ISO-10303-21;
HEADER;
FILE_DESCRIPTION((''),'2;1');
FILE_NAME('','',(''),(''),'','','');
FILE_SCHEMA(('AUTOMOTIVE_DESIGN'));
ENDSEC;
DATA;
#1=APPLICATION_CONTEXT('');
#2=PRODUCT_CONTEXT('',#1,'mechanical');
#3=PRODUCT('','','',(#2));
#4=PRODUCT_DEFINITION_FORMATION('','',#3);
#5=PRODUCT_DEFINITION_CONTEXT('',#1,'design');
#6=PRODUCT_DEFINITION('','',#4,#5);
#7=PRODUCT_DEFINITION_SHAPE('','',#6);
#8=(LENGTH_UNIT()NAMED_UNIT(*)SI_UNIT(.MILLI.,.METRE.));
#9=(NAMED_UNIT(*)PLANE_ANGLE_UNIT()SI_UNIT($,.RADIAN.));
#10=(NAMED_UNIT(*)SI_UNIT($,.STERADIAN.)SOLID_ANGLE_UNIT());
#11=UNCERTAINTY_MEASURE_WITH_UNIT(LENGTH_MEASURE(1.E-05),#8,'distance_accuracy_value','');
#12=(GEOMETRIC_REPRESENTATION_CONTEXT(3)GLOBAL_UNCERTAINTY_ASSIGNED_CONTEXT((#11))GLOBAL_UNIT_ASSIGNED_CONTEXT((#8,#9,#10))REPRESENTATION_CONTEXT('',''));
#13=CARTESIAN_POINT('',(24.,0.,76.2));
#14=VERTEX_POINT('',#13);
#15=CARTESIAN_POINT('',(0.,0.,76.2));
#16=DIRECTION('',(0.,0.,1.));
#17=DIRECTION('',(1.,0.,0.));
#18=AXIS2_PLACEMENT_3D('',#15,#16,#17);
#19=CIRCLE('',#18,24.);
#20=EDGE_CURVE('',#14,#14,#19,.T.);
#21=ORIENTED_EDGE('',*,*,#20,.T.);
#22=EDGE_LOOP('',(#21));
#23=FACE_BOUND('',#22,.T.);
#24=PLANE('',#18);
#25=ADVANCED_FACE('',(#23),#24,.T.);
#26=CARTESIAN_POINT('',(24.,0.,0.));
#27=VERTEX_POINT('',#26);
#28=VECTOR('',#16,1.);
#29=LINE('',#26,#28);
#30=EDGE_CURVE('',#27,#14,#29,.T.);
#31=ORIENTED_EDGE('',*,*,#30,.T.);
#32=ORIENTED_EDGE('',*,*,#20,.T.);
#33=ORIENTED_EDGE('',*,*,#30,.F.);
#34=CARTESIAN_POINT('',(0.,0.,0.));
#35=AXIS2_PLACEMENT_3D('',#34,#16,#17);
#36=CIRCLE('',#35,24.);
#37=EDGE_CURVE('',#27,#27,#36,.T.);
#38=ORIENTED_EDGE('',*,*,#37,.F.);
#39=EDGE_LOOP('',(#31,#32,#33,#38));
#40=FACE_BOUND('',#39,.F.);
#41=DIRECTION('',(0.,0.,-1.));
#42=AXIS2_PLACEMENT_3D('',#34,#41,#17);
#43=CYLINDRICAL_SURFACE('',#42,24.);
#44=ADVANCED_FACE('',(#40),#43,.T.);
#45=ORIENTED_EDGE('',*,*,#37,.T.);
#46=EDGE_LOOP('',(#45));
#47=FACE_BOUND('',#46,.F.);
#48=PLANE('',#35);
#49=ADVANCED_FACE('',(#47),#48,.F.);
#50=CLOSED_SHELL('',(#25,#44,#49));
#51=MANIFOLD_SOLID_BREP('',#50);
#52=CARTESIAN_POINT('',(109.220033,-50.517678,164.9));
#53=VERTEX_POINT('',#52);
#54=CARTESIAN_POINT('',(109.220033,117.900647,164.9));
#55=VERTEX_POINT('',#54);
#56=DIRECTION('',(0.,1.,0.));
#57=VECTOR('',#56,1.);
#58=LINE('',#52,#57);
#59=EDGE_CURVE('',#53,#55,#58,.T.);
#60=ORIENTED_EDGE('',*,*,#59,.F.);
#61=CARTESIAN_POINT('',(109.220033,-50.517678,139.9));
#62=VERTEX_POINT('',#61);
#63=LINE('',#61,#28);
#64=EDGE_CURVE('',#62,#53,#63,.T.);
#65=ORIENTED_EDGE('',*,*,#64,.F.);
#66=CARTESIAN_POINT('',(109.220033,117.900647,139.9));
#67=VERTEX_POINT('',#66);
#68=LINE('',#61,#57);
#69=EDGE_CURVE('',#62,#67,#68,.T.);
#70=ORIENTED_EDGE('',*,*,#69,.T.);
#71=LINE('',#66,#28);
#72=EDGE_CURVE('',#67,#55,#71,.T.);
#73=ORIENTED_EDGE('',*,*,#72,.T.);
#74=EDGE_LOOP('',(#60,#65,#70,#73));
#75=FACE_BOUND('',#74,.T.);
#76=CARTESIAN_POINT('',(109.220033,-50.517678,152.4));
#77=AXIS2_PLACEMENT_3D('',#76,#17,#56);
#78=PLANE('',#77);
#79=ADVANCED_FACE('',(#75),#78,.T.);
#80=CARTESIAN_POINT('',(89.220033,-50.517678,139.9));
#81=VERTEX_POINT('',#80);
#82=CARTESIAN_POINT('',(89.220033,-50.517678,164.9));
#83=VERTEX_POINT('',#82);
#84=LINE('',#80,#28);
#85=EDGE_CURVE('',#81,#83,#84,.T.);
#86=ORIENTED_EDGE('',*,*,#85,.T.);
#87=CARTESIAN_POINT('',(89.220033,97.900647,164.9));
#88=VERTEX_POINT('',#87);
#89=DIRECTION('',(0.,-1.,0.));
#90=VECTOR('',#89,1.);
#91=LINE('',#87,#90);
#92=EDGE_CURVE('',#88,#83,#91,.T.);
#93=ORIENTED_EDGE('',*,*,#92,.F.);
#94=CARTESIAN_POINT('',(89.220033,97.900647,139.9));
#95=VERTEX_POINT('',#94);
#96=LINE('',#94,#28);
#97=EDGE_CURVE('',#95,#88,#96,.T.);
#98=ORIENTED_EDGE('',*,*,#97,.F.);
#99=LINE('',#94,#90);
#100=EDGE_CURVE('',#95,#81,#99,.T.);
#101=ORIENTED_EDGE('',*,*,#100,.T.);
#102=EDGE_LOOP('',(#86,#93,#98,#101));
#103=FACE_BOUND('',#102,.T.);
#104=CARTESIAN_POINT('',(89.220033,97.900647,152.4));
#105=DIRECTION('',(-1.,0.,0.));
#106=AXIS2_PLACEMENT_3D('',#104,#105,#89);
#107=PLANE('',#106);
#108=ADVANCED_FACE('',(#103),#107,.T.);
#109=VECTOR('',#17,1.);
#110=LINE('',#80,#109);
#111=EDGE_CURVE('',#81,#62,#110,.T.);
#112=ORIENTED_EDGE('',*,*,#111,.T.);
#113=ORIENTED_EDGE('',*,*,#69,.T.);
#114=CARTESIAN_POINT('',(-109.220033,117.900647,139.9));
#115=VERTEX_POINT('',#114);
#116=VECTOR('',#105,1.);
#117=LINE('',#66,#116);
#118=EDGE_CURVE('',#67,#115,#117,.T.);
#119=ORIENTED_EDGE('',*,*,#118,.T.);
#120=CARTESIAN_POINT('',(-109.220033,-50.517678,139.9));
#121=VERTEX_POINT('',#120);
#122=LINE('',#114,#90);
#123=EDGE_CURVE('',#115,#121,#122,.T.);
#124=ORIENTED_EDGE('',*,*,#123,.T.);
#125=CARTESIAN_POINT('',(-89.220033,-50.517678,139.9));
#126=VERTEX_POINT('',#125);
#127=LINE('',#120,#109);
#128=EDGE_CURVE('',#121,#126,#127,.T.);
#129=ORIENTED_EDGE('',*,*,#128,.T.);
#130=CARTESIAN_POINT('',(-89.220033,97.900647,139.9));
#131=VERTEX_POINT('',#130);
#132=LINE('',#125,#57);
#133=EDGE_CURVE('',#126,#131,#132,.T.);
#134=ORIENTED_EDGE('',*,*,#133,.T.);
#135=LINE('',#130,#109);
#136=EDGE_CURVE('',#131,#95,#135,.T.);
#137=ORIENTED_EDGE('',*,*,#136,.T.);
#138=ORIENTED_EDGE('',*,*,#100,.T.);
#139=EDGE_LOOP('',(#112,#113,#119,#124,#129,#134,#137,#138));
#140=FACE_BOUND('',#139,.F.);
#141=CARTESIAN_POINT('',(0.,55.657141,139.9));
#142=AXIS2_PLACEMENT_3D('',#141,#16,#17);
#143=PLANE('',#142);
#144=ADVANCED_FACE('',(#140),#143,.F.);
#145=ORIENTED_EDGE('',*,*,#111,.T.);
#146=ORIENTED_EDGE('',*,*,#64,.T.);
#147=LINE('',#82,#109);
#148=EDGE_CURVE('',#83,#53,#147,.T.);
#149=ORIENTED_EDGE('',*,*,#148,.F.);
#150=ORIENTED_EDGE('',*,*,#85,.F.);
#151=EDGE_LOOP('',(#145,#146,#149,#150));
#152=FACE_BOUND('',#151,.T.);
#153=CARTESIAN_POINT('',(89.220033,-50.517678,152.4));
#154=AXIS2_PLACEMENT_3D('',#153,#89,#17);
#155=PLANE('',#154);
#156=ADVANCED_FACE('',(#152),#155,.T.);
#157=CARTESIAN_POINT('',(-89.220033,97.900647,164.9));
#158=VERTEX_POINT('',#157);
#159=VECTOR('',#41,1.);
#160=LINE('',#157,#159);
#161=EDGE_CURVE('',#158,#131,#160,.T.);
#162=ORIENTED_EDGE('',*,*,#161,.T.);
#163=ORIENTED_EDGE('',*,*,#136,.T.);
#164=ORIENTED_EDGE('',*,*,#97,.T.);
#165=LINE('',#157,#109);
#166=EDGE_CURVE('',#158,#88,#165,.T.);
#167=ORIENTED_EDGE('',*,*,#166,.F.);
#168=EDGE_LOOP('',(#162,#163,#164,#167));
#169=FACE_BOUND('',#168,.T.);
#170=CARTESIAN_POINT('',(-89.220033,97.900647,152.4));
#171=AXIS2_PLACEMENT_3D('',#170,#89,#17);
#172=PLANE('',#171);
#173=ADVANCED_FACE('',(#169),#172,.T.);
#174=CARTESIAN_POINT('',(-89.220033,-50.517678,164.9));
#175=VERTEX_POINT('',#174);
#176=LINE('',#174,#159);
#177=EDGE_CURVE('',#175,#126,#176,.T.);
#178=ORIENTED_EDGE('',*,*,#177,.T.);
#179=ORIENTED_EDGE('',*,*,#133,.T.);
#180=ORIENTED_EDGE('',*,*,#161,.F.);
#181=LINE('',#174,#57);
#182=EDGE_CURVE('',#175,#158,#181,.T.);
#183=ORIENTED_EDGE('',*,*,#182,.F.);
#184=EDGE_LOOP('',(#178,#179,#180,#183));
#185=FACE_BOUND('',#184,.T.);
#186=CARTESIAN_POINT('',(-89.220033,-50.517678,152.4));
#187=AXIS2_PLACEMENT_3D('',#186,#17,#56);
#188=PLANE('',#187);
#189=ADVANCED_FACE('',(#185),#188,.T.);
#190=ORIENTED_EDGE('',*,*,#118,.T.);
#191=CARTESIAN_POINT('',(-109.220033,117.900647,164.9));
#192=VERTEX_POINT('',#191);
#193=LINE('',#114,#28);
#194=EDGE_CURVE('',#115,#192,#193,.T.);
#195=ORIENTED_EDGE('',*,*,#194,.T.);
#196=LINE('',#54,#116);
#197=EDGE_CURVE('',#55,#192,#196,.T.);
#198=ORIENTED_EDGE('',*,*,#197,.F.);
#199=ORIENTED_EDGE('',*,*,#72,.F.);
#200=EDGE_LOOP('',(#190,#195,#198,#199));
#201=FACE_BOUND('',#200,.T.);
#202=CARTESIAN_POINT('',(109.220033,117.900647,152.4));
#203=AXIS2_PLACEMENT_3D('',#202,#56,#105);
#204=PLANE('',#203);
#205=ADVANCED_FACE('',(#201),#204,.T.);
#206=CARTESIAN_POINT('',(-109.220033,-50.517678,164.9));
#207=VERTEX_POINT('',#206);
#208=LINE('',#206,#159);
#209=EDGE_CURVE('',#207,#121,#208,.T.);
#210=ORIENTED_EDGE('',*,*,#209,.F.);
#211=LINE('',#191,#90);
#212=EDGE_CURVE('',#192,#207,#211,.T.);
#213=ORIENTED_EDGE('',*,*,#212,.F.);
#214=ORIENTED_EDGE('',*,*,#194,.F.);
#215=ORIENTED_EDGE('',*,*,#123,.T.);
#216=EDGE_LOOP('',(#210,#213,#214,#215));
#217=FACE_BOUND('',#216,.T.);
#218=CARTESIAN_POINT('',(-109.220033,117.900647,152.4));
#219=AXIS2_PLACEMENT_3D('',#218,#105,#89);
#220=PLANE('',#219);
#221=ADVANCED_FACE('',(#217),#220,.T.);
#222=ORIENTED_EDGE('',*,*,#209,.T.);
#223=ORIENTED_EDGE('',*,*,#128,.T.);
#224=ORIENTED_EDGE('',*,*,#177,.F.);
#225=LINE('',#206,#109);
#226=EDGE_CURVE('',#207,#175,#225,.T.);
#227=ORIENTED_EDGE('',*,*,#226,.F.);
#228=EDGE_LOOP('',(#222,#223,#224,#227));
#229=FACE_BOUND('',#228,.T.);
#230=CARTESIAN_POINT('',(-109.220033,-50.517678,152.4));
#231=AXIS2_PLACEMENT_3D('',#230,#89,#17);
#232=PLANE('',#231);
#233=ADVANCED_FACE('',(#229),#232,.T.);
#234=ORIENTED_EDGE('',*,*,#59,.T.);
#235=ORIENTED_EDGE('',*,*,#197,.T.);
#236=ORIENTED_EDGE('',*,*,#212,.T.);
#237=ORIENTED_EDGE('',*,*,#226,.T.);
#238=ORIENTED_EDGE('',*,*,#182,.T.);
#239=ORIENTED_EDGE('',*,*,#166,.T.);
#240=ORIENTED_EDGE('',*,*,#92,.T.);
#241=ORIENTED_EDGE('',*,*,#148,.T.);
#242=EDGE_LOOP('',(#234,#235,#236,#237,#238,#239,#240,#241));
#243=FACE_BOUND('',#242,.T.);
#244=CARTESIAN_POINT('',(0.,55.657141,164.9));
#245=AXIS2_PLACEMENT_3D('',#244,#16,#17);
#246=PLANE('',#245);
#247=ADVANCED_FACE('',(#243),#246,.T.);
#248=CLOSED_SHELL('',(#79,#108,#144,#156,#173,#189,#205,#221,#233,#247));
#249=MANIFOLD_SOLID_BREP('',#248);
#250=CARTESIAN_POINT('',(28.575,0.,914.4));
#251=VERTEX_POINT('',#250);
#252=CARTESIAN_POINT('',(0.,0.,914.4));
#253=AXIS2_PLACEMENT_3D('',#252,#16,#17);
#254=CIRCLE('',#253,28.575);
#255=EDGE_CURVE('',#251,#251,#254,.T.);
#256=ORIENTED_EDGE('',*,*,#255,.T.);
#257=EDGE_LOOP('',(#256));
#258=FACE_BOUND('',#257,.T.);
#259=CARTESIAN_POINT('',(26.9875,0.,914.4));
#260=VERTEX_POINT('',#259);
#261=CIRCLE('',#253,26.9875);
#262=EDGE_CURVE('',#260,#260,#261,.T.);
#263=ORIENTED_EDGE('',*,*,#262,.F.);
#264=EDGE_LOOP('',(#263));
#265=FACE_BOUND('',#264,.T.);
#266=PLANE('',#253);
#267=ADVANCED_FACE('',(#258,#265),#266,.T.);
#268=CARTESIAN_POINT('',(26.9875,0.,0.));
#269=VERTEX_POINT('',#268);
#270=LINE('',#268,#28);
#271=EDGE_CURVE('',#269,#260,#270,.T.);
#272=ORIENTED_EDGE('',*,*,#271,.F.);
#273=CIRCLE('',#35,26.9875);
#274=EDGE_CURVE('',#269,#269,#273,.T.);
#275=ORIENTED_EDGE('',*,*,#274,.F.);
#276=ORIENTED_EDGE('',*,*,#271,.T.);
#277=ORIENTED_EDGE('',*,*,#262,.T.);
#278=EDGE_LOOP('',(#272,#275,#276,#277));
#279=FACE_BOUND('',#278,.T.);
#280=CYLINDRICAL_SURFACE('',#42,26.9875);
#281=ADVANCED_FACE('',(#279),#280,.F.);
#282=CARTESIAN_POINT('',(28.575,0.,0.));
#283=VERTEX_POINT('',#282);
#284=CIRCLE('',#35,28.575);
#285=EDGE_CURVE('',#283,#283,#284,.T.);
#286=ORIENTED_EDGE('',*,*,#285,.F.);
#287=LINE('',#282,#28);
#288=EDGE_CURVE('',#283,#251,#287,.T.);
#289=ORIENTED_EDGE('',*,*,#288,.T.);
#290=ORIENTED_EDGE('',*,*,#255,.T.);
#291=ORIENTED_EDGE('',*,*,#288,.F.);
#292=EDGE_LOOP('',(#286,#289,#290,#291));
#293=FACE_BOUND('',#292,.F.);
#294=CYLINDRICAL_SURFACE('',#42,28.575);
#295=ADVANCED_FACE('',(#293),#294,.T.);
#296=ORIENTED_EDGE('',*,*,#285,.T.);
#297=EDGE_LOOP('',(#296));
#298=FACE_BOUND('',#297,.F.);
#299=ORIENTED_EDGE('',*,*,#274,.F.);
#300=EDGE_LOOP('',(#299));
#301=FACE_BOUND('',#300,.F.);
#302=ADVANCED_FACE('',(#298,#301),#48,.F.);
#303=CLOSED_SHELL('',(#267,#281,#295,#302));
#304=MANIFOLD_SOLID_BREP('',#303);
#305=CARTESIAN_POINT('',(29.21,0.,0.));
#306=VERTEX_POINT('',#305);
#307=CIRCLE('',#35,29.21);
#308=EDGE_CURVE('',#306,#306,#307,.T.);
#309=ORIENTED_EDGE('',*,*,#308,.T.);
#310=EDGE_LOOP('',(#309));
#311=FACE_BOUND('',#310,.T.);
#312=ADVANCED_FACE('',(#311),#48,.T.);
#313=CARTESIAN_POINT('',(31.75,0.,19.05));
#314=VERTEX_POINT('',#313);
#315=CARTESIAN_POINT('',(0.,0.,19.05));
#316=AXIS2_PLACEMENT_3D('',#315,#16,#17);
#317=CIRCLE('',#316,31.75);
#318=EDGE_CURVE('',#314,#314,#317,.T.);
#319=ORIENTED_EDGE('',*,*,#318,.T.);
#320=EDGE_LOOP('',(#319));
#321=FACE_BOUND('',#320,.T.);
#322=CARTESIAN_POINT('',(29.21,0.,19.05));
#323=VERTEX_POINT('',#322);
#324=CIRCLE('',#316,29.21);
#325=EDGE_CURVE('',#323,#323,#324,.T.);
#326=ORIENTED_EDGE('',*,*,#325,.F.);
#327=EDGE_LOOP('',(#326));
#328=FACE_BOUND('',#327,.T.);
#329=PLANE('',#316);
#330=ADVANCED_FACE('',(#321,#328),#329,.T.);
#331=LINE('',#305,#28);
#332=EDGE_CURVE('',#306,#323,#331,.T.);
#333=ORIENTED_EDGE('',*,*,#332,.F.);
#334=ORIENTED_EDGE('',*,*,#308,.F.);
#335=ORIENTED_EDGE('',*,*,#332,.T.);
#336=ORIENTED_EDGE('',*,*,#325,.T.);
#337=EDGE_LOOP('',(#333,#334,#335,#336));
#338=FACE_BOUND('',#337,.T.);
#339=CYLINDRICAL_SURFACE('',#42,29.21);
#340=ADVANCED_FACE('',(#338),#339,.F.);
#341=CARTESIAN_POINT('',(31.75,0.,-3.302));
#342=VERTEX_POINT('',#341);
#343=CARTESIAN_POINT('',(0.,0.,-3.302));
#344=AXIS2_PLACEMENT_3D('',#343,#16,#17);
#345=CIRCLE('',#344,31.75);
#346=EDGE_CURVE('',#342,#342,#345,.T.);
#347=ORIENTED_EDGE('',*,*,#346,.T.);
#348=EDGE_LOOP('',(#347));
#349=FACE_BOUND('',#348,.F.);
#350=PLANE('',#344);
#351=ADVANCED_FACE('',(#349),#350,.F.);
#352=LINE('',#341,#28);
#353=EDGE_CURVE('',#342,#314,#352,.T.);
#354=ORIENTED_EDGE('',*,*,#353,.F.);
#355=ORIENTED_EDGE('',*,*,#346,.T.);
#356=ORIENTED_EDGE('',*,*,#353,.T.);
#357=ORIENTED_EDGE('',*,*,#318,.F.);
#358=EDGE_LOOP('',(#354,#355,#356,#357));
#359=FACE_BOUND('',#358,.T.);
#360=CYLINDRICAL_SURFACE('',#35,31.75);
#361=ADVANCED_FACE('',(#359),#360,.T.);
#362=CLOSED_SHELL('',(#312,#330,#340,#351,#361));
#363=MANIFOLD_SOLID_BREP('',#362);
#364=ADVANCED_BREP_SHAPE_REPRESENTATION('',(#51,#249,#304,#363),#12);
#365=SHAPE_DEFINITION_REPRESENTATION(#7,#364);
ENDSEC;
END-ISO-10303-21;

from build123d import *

# Parameters (mm, degrees)
F0_R      = 28.575
F0_R_2    = 26.9875
F1_DEPTH  = 914.4
F2_R      = 24
F3_DEPTH  = 76.2
F5_R      = 31.75
F5_R_2    = 29.21
F6_DEPTH  = 19.05
F4_R      = 31.75
F7_DEPTH  = 3.302
F10_DEPTH = 12.5


with BuildPart() as f1:
    # F0 (on Top) → F1 (new body)
    with BuildSketch(Plane.XY):
        Circle(F0_R)
        Circle(F0_R_2, mode=Mode.SUBTRACT)
    extrude(amount=F1_DEPTH)


with BuildPart() as f3:
    # F2 (on Top) → F3 (new body)
    with BuildSketch(Plane.XY):
        Circle(F2_R)
    extrude(amount=F3_DEPTH)


with BuildPart() as f6:
    # F5 (on Top) → F6 (new body)
    with BuildSketch(Plane.XY):
        Circle(F5_R)
        Circle(F5_R_2, mode=Mode.SUBTRACT)
    extrude(amount=F6_DEPTH)

    # F4 (on Top) → F7 (join)
    with BuildSketch(Plane.XY):
        Circle(F4_R)
    extrude(amount=-F7_DEPTH)


with BuildPart() as f10:
    # F9 (on offset) → F10 (new body, symmetric)
    with BuildSketch(Plane.XY.offset(152.4)):
        Polygon((-89.2200332342, 97.9006469014), (89.2200332342, 97.9006469014), (89.2200332342, -50.5176782608), (109.2200332342, -50.5176782608), (109.2200332342, 117.9006469014), (-109.2200332342, 117.9006469014), (-109.2200332342, -50.5176782608), (-89.2200332342, -50.5176782608), align=None)
    extrude(amount=F10_DEPTH, both=True)


solid = Compound([f1.part, f3.part, f6.part, f10.part])
